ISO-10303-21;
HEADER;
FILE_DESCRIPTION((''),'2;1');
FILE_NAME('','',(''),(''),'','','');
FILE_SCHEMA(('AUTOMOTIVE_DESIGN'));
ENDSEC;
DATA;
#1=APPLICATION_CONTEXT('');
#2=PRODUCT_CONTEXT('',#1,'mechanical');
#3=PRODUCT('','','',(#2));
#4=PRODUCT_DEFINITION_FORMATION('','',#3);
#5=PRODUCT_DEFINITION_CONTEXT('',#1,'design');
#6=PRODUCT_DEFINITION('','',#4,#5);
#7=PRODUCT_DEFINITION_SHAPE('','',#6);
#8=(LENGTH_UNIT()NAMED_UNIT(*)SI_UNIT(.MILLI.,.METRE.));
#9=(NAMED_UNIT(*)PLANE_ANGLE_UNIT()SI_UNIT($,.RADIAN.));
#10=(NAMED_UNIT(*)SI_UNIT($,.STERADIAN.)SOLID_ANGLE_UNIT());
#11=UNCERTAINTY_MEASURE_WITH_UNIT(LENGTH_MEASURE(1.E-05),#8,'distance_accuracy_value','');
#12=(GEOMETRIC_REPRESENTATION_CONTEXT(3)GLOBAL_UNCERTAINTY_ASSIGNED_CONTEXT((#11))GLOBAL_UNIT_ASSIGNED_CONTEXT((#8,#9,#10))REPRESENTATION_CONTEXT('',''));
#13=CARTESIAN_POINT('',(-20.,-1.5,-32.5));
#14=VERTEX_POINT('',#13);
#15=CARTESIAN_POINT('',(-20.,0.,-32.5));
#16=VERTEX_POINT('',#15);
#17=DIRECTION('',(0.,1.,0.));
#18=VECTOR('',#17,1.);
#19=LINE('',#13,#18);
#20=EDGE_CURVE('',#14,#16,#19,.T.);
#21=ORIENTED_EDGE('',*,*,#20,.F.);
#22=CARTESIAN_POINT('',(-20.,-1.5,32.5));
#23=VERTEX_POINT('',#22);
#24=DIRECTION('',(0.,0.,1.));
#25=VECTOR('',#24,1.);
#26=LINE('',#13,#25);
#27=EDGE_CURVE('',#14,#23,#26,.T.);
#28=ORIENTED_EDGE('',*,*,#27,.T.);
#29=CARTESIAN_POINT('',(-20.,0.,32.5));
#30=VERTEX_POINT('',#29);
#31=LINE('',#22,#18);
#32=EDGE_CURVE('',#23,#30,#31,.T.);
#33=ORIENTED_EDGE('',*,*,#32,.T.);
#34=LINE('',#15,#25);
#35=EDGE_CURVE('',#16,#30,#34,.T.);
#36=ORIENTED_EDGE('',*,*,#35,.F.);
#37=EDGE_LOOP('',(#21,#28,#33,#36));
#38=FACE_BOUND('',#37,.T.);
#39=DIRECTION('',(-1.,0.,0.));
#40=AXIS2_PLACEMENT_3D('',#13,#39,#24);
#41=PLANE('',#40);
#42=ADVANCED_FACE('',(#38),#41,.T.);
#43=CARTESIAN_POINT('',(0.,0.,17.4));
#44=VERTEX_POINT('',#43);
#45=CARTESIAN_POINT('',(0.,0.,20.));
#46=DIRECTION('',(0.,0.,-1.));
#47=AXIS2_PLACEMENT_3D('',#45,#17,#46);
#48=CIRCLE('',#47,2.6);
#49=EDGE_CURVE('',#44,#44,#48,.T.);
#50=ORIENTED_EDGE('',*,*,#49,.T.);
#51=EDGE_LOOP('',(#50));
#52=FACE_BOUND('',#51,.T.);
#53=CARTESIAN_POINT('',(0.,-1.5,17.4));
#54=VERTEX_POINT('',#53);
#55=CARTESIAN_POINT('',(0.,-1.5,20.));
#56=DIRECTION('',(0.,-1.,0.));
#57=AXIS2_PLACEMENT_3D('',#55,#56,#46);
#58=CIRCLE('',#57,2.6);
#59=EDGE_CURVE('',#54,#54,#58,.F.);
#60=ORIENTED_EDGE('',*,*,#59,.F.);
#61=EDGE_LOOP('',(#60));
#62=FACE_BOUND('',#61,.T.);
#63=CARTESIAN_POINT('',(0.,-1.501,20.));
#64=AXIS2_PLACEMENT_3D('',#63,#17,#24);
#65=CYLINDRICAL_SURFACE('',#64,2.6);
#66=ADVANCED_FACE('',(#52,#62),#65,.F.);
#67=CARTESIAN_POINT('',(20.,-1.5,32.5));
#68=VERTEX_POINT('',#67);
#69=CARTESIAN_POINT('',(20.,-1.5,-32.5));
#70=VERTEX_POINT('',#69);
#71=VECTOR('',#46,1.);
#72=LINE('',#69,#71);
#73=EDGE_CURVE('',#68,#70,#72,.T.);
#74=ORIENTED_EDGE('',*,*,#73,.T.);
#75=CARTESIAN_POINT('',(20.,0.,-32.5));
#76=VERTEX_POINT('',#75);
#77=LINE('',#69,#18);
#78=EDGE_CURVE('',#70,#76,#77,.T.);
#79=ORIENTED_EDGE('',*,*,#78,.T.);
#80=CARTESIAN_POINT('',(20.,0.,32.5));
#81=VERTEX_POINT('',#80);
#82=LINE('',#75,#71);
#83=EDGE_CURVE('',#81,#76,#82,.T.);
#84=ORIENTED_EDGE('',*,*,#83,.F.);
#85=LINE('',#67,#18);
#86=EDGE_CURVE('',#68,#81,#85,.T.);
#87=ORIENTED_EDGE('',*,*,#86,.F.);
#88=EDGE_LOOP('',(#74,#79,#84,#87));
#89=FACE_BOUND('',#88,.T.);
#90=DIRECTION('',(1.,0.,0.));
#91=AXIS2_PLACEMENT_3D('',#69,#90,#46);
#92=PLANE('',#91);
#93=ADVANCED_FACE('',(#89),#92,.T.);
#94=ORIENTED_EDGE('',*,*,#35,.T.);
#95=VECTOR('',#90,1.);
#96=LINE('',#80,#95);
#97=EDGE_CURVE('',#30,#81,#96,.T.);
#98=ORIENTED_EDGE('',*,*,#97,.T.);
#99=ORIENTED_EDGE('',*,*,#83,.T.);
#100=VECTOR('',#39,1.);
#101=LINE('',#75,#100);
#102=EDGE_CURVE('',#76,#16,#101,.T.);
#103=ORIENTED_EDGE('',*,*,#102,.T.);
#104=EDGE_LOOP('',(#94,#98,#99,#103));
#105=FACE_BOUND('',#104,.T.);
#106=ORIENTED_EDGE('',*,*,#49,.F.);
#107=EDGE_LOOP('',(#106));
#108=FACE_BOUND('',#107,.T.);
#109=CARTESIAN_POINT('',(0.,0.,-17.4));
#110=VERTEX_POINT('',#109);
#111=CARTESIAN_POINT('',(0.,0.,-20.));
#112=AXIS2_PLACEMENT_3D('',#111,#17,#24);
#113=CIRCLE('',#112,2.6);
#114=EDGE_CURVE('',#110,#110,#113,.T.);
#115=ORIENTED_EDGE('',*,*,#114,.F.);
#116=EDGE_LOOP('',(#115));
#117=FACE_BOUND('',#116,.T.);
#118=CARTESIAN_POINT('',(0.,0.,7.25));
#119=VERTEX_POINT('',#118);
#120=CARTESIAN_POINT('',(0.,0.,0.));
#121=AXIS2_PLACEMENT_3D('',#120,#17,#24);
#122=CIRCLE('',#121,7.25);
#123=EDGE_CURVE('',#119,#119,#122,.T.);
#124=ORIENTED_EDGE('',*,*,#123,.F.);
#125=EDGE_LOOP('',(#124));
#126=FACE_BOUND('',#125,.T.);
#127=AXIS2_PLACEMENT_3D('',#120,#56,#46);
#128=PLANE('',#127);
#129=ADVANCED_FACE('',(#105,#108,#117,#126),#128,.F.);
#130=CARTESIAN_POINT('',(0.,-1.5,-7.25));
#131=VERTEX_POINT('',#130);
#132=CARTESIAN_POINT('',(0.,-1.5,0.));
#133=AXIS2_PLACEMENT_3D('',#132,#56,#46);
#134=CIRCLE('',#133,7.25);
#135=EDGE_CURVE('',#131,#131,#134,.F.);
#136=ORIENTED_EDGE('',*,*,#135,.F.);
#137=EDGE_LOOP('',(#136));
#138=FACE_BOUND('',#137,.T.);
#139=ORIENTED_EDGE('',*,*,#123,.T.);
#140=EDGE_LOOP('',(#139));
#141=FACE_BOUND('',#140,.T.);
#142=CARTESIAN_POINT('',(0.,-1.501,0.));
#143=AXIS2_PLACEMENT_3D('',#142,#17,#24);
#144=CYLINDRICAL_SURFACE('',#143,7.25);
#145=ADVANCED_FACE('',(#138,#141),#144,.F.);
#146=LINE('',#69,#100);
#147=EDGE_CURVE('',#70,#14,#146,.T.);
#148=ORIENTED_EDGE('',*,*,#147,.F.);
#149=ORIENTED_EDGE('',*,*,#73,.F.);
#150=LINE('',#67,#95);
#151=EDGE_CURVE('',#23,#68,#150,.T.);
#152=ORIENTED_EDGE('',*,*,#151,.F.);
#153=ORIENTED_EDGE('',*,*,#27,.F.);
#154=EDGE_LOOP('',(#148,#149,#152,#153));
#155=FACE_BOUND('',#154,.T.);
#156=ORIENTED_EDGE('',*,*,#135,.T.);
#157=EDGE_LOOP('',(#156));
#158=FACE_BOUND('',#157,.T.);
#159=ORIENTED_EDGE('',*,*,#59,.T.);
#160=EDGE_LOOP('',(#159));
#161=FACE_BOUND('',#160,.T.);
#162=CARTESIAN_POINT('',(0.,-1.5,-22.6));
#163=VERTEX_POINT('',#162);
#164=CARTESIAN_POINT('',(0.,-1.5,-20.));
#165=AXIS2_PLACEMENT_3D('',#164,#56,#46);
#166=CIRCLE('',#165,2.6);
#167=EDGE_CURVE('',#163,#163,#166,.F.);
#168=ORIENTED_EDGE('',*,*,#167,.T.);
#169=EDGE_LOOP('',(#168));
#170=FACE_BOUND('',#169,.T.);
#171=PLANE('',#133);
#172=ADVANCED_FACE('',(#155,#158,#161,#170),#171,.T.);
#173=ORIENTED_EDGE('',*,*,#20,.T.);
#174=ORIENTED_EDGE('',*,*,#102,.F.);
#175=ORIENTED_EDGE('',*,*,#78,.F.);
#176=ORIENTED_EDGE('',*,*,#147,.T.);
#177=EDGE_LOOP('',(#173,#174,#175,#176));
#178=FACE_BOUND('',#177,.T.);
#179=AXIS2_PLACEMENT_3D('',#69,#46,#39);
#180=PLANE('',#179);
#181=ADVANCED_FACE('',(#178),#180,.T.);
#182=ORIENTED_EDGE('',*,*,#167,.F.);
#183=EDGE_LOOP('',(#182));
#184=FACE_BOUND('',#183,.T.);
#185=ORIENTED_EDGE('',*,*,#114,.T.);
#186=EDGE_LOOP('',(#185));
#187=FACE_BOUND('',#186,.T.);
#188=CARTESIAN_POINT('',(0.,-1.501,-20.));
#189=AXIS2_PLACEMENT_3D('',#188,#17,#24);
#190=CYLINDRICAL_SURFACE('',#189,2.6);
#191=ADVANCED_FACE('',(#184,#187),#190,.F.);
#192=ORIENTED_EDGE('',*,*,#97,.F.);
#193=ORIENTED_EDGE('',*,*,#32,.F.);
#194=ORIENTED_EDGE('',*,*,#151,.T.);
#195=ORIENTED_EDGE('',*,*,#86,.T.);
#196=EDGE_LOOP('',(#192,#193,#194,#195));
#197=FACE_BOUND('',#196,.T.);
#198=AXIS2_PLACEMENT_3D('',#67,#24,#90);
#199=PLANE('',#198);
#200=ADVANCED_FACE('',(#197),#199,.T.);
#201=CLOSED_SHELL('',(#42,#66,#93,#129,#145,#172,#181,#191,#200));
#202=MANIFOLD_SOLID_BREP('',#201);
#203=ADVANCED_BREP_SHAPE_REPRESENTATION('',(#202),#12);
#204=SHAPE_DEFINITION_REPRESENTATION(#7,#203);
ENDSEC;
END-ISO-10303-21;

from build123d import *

# Parameters (mm, degrees)
ESQUISSE1_W               = 40
ESQUISSE1_H               = 65
T_LE_DE_BASE_PLI_E1_DEPTH = 1.5
PASSAGE_VIS_M5_REACH      = 40.19
ESQUISSE6_R               = 2.6
PASSAGE_JAUGE_REACH       = 40.19
ESQUISSE7_R               = 7.25


# Sheet-metal steps are written as plain solids
with BuildPart() as part:
    # Esquisse1 → Tôle de base pliée1 (new body)
    with BuildSketch(Plane(origin=(0, 0, 0), x_dir=(1, 0, 0), z_dir=(0, 1, 0))):
        Rectangle(ESQUISSE1_W, ESQUISSE1_H)
    extrude(amount=-T_LE_DE_BASE_PLI_E1_DEPTH)

    # Esquisse6 → Passage_Vis_M5 (cut, up to next)
    with BuildSketch(Plane(origin=(0, 0, 0), x_dir=(1, 0, 0), z_dir=(0, 1, 0)), mode=Mode.PRIVATE) as passage_vis_m5_sk1:
        with Locations(Location((0, 20, 0), (0, 0, 270))):
            Circle(ESQUISSE6_R)
    passage_vis_m5_tool1 = extrude(passage_vis_m5_sk1.sketch, amount=-PASSAGE_VIS_M5_REACH, mode=Mode.PRIVATE) & part.part
    # Esquisse6 → Passage_Vis_M5 (cut, up to next)
    with BuildSketch(Plane(origin=(0, 0, 0), x_dir=(1, 0, 0), z_dir=(0, 1, 0)), mode=Mode.PRIVATE) as passage_vis_m5_sk2:
        with Locations(Location((0, -20, 0), (0, 0, 90))):
            Circle(ESQUISSE6_R)
    passage_vis_m5_tool2 = extrude(passage_vis_m5_sk2.sketch, amount=-PASSAGE_VIS_M5_REACH, mode=Mode.PRIVATE) & part.part
    add(passage_vis_m5_tool1.solids().sort_by_distance((0, 0, -20))[0], mode=Mode.SUBTRACT)
    add(passage_vis_m5_tool2.solids().sort_by_distance((0, 0, 20))[0], mode=Mode.SUBTRACT)

    # Esquisse7 → Passage_Jauge (cut, up to next)
    with BuildSketch(Plane(origin=(0, 0, 0), x_dir=(1, 0, 0), z_dir=(0, 1, 0)), mode=Mode.PRIVATE) as passage_jauge_sk1:
        with Locations(Location((0, 0, 0), (0, 0, 270))):
            Circle(ESQUISSE7_R)
    passage_jauge_tool1 = extrude(passage_jauge_sk1.sketch, amount=-PASSAGE_JAUGE_REACH, mode=Mode.PRIVATE) & part.part
    add(passage_jauge_tool1.solids().sort_by_distance((0, 0, 0))[0], mode=Mode.SUBTRACT)


solid = part.part
